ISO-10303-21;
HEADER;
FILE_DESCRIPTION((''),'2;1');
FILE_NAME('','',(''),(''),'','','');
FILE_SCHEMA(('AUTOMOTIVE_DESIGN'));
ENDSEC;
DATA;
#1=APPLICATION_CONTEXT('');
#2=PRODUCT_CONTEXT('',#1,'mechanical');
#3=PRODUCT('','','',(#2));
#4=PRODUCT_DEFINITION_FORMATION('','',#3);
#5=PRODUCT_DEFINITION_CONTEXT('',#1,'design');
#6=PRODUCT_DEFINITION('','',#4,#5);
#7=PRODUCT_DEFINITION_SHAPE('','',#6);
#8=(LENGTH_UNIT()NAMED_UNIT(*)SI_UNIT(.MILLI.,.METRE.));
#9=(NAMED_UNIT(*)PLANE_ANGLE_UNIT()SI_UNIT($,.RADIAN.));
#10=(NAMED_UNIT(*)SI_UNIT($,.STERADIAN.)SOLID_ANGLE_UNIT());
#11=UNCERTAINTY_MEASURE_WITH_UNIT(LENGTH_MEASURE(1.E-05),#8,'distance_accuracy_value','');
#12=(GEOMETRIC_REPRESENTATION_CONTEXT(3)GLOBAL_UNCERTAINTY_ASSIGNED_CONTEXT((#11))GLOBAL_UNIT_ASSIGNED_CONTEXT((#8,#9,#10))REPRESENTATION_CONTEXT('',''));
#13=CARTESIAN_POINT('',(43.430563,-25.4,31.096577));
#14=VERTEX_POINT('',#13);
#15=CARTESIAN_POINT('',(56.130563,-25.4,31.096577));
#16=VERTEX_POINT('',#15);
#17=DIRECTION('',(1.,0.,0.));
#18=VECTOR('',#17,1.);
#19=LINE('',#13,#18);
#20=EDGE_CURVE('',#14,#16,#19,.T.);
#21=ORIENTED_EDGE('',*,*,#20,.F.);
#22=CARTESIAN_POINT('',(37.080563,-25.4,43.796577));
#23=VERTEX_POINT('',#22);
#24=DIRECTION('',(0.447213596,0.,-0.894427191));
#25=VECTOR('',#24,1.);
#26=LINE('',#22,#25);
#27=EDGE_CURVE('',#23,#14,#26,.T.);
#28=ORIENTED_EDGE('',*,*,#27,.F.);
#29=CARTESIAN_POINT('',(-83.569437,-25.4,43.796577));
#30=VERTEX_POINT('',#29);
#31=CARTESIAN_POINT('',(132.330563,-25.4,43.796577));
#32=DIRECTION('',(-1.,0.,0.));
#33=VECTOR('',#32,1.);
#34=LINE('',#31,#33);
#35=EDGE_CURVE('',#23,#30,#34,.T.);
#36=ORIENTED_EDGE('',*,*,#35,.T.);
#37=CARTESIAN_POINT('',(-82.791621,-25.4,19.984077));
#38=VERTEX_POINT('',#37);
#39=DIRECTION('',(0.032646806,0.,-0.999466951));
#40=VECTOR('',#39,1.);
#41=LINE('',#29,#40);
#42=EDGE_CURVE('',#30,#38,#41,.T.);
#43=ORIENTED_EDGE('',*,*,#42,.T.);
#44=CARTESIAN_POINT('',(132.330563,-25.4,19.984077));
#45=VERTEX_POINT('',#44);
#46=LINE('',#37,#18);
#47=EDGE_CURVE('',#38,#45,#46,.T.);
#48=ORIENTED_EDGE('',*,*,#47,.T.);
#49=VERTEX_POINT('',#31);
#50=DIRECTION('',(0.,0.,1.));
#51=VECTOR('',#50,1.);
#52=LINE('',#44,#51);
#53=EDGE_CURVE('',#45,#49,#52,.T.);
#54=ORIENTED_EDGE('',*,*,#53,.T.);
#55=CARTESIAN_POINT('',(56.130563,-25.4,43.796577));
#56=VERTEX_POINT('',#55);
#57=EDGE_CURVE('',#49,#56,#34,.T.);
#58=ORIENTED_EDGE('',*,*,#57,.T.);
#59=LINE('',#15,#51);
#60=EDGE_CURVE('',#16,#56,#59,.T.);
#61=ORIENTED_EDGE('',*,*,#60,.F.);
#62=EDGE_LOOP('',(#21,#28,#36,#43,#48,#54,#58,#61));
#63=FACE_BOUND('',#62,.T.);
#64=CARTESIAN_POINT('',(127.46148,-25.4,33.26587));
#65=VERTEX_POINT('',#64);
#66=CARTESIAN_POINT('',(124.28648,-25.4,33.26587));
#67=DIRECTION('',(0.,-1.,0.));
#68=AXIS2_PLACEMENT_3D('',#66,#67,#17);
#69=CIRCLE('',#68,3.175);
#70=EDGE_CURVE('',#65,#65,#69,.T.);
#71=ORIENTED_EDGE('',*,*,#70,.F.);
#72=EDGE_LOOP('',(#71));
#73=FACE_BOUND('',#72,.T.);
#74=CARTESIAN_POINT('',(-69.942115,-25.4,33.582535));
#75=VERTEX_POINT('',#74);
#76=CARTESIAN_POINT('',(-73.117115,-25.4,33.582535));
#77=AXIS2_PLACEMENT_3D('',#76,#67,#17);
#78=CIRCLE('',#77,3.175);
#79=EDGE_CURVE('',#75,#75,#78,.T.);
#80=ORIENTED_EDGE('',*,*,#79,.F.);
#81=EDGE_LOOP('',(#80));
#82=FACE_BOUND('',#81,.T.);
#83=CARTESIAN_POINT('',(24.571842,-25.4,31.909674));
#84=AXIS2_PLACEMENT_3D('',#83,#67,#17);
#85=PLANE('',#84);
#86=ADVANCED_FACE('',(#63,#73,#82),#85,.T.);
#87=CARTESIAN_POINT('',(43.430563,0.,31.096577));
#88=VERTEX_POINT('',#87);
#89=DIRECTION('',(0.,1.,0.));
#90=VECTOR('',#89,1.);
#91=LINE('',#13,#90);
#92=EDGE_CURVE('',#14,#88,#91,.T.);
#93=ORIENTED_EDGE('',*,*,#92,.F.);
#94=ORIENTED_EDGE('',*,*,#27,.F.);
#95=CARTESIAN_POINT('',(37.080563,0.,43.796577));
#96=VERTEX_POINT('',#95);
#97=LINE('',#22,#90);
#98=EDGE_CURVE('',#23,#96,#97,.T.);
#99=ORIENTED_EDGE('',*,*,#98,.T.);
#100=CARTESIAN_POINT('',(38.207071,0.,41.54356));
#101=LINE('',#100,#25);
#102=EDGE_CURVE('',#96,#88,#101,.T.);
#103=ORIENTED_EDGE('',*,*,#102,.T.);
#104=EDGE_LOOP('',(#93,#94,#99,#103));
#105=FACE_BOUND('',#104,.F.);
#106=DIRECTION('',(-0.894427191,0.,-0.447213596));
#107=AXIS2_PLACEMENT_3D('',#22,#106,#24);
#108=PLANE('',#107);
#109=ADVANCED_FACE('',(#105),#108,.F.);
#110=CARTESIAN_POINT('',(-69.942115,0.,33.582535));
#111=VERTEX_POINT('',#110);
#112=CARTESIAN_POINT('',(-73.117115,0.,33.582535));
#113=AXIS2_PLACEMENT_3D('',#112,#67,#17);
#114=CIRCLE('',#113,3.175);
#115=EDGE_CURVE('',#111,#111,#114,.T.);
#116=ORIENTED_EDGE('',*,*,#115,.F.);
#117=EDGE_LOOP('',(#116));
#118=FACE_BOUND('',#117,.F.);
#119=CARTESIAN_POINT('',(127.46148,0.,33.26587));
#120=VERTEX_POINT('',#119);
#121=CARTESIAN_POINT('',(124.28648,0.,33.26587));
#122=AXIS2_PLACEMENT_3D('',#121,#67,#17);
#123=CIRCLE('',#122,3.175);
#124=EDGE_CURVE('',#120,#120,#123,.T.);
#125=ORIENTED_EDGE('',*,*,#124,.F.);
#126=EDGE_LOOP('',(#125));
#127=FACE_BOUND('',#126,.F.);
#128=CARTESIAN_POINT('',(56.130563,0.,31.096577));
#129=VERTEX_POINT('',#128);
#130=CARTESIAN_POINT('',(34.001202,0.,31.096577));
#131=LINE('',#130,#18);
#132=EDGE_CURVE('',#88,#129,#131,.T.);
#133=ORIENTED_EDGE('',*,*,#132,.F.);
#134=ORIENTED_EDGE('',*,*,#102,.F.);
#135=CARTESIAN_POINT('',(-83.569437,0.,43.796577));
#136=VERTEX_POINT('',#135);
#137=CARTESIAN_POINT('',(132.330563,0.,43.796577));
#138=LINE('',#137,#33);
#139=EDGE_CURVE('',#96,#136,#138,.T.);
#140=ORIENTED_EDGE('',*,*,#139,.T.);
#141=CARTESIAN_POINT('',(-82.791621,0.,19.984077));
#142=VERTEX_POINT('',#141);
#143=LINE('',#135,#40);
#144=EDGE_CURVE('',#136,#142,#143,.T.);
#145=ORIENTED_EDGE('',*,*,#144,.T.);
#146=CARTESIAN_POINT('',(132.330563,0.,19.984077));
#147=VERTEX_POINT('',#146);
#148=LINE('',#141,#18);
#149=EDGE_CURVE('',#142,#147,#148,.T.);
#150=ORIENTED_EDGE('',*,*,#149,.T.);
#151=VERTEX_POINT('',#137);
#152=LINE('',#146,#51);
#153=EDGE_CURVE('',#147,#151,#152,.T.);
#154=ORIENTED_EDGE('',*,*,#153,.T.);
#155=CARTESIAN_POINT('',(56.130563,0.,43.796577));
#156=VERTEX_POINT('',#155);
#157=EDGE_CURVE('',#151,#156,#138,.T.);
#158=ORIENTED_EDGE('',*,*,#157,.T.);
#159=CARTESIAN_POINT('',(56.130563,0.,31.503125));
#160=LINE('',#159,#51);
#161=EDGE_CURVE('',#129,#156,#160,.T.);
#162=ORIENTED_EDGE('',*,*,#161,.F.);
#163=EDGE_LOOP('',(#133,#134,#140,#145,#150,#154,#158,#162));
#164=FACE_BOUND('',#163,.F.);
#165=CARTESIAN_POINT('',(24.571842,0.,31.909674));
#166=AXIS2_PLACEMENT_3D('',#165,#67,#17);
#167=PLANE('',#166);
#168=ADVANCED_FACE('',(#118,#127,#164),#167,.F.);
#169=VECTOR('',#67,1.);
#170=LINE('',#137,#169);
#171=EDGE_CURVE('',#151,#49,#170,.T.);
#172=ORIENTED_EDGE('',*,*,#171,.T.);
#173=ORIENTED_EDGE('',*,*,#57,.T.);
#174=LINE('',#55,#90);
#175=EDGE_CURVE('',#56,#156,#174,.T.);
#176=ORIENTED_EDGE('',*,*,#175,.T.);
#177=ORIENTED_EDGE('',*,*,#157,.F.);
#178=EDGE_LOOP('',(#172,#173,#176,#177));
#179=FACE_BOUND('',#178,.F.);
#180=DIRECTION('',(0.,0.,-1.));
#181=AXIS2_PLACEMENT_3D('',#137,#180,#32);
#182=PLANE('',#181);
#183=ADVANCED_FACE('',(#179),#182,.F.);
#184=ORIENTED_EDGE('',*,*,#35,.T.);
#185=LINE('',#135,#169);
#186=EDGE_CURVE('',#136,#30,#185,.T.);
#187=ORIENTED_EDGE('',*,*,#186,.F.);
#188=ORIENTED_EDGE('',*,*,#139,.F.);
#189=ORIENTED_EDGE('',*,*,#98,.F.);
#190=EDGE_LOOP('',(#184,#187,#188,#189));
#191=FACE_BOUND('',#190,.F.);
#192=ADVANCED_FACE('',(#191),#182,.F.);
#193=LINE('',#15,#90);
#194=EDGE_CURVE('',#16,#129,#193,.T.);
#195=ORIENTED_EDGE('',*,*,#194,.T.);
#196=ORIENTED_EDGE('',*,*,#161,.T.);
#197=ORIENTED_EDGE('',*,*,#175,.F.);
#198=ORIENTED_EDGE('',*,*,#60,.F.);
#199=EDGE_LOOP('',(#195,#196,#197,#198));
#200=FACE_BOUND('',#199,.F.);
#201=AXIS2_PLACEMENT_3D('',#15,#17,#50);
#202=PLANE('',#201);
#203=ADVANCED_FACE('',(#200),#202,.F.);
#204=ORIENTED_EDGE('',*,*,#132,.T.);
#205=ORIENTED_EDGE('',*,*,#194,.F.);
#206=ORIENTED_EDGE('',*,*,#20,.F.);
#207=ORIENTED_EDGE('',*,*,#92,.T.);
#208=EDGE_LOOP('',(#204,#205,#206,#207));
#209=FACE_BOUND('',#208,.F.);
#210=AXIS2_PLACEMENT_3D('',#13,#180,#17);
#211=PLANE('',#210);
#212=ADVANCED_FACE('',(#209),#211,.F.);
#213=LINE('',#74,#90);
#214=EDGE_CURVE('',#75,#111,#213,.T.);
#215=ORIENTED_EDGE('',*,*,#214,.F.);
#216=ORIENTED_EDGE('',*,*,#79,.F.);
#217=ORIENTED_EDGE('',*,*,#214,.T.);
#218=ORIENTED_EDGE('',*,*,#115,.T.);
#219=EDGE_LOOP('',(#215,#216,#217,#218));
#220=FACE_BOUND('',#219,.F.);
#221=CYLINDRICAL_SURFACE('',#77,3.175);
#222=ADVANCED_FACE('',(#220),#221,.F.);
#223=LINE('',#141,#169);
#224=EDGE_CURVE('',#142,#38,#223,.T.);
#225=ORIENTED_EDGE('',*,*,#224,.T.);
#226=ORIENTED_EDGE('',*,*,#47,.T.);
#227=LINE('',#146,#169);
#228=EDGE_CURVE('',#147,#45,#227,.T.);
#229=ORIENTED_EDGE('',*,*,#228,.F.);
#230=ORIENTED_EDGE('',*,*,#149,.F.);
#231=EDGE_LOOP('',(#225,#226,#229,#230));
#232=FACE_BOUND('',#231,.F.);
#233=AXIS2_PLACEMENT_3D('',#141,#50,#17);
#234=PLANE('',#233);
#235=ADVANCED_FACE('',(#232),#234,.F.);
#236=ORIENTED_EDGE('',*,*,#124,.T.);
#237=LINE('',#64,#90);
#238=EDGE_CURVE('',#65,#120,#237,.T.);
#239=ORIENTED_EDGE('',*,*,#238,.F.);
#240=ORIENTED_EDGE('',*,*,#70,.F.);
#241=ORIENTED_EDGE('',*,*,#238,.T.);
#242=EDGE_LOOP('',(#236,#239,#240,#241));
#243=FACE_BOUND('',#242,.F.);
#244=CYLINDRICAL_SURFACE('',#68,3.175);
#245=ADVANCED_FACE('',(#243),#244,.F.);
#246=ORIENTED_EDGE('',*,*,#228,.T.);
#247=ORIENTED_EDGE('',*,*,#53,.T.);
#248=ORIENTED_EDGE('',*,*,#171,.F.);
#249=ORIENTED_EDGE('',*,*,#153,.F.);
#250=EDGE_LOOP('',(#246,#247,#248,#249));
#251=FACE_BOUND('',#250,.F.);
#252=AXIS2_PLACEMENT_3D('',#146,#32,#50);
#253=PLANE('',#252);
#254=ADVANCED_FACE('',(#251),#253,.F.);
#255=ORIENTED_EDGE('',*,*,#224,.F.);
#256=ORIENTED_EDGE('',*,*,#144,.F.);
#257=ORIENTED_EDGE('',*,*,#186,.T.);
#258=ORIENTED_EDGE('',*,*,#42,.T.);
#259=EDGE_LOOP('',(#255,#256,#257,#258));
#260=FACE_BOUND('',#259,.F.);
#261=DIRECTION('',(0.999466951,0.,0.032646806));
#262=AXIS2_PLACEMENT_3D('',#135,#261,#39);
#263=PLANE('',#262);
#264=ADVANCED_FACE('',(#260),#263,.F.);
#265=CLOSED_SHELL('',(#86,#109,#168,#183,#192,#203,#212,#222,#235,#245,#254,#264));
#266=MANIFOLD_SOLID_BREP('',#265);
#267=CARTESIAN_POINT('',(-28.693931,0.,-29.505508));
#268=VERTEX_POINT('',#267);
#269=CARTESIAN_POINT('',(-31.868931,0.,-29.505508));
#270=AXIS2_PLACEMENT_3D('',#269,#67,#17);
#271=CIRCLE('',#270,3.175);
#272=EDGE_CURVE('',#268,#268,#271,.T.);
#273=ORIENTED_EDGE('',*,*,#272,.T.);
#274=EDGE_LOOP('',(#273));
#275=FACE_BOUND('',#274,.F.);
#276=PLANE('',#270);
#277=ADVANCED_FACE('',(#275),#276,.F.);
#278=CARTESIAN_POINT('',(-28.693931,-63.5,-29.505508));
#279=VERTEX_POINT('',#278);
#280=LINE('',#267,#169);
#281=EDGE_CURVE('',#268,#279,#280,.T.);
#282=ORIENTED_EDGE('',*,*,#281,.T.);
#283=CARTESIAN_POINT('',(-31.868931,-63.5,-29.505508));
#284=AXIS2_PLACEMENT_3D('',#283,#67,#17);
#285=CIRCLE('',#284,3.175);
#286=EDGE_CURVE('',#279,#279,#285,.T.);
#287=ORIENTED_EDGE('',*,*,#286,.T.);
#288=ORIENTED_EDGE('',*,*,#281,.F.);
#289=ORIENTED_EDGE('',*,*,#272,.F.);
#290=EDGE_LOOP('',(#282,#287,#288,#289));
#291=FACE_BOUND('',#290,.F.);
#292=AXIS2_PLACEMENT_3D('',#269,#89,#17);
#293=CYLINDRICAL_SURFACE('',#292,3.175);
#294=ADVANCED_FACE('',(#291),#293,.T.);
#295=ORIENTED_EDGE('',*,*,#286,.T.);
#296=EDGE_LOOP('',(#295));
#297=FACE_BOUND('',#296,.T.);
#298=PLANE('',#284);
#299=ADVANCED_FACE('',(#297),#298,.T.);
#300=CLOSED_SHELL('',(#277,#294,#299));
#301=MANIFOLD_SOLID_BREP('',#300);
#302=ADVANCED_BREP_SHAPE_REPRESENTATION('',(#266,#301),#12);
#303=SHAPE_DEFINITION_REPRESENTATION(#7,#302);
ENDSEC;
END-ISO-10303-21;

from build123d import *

# Parameters (mm, degrees)
F1_DEPTH = 25.4
F2_R     = 3.175
F3_DEPTH = 25.401
F4_R     = 3.175
F5_DEPTH = 63.5


# Not quite as in the source:
# - a feature names something its author has since deleted; it is built from what else it names


with BuildPart() as f1:
    # F0 (on Front) → F1 (new body)
    with BuildSketch(Plane.XZ):
        Polygon((132.3305627346, 43.7965765595), (-83.5694372654, 43.7965765595), (-82.7916205839, 19.9840765595), (132.3305627346, 19.9840765595), align=None)
    extrude(amount=F1_DEPTH)

    # F2 (on face) → F3 (cut, through all)
    with BuildSketch(Plane.XZ.offset(25.4)):
        with Locations((-73.1171146035, 33.582534641)):
            Circle(F2_R)
        Polygon((43.4305627346, 31.0965765595), (56.1305627346, 31.0965765595), (56.1305627346, 43.7965765595), (37.0805627346, 43.7965765595), align=None)
        with Locations((124.286480248, 33.2658700645)):
            Circle(F2_R)
    extrude(amount=-F3_DEPTH, mode=Mode.SUBTRACT)


with BuildPart() as f5:
    # F4 (on Front) → F5 (new body)
    with BuildSketch(Plane.XZ):
        with Locations((-31.8689309061, -29.5055080205)):
            Circle(F4_R)
    extrude(amount=F5_DEPTH)


solid = Compound([f1.part, f5.part])
